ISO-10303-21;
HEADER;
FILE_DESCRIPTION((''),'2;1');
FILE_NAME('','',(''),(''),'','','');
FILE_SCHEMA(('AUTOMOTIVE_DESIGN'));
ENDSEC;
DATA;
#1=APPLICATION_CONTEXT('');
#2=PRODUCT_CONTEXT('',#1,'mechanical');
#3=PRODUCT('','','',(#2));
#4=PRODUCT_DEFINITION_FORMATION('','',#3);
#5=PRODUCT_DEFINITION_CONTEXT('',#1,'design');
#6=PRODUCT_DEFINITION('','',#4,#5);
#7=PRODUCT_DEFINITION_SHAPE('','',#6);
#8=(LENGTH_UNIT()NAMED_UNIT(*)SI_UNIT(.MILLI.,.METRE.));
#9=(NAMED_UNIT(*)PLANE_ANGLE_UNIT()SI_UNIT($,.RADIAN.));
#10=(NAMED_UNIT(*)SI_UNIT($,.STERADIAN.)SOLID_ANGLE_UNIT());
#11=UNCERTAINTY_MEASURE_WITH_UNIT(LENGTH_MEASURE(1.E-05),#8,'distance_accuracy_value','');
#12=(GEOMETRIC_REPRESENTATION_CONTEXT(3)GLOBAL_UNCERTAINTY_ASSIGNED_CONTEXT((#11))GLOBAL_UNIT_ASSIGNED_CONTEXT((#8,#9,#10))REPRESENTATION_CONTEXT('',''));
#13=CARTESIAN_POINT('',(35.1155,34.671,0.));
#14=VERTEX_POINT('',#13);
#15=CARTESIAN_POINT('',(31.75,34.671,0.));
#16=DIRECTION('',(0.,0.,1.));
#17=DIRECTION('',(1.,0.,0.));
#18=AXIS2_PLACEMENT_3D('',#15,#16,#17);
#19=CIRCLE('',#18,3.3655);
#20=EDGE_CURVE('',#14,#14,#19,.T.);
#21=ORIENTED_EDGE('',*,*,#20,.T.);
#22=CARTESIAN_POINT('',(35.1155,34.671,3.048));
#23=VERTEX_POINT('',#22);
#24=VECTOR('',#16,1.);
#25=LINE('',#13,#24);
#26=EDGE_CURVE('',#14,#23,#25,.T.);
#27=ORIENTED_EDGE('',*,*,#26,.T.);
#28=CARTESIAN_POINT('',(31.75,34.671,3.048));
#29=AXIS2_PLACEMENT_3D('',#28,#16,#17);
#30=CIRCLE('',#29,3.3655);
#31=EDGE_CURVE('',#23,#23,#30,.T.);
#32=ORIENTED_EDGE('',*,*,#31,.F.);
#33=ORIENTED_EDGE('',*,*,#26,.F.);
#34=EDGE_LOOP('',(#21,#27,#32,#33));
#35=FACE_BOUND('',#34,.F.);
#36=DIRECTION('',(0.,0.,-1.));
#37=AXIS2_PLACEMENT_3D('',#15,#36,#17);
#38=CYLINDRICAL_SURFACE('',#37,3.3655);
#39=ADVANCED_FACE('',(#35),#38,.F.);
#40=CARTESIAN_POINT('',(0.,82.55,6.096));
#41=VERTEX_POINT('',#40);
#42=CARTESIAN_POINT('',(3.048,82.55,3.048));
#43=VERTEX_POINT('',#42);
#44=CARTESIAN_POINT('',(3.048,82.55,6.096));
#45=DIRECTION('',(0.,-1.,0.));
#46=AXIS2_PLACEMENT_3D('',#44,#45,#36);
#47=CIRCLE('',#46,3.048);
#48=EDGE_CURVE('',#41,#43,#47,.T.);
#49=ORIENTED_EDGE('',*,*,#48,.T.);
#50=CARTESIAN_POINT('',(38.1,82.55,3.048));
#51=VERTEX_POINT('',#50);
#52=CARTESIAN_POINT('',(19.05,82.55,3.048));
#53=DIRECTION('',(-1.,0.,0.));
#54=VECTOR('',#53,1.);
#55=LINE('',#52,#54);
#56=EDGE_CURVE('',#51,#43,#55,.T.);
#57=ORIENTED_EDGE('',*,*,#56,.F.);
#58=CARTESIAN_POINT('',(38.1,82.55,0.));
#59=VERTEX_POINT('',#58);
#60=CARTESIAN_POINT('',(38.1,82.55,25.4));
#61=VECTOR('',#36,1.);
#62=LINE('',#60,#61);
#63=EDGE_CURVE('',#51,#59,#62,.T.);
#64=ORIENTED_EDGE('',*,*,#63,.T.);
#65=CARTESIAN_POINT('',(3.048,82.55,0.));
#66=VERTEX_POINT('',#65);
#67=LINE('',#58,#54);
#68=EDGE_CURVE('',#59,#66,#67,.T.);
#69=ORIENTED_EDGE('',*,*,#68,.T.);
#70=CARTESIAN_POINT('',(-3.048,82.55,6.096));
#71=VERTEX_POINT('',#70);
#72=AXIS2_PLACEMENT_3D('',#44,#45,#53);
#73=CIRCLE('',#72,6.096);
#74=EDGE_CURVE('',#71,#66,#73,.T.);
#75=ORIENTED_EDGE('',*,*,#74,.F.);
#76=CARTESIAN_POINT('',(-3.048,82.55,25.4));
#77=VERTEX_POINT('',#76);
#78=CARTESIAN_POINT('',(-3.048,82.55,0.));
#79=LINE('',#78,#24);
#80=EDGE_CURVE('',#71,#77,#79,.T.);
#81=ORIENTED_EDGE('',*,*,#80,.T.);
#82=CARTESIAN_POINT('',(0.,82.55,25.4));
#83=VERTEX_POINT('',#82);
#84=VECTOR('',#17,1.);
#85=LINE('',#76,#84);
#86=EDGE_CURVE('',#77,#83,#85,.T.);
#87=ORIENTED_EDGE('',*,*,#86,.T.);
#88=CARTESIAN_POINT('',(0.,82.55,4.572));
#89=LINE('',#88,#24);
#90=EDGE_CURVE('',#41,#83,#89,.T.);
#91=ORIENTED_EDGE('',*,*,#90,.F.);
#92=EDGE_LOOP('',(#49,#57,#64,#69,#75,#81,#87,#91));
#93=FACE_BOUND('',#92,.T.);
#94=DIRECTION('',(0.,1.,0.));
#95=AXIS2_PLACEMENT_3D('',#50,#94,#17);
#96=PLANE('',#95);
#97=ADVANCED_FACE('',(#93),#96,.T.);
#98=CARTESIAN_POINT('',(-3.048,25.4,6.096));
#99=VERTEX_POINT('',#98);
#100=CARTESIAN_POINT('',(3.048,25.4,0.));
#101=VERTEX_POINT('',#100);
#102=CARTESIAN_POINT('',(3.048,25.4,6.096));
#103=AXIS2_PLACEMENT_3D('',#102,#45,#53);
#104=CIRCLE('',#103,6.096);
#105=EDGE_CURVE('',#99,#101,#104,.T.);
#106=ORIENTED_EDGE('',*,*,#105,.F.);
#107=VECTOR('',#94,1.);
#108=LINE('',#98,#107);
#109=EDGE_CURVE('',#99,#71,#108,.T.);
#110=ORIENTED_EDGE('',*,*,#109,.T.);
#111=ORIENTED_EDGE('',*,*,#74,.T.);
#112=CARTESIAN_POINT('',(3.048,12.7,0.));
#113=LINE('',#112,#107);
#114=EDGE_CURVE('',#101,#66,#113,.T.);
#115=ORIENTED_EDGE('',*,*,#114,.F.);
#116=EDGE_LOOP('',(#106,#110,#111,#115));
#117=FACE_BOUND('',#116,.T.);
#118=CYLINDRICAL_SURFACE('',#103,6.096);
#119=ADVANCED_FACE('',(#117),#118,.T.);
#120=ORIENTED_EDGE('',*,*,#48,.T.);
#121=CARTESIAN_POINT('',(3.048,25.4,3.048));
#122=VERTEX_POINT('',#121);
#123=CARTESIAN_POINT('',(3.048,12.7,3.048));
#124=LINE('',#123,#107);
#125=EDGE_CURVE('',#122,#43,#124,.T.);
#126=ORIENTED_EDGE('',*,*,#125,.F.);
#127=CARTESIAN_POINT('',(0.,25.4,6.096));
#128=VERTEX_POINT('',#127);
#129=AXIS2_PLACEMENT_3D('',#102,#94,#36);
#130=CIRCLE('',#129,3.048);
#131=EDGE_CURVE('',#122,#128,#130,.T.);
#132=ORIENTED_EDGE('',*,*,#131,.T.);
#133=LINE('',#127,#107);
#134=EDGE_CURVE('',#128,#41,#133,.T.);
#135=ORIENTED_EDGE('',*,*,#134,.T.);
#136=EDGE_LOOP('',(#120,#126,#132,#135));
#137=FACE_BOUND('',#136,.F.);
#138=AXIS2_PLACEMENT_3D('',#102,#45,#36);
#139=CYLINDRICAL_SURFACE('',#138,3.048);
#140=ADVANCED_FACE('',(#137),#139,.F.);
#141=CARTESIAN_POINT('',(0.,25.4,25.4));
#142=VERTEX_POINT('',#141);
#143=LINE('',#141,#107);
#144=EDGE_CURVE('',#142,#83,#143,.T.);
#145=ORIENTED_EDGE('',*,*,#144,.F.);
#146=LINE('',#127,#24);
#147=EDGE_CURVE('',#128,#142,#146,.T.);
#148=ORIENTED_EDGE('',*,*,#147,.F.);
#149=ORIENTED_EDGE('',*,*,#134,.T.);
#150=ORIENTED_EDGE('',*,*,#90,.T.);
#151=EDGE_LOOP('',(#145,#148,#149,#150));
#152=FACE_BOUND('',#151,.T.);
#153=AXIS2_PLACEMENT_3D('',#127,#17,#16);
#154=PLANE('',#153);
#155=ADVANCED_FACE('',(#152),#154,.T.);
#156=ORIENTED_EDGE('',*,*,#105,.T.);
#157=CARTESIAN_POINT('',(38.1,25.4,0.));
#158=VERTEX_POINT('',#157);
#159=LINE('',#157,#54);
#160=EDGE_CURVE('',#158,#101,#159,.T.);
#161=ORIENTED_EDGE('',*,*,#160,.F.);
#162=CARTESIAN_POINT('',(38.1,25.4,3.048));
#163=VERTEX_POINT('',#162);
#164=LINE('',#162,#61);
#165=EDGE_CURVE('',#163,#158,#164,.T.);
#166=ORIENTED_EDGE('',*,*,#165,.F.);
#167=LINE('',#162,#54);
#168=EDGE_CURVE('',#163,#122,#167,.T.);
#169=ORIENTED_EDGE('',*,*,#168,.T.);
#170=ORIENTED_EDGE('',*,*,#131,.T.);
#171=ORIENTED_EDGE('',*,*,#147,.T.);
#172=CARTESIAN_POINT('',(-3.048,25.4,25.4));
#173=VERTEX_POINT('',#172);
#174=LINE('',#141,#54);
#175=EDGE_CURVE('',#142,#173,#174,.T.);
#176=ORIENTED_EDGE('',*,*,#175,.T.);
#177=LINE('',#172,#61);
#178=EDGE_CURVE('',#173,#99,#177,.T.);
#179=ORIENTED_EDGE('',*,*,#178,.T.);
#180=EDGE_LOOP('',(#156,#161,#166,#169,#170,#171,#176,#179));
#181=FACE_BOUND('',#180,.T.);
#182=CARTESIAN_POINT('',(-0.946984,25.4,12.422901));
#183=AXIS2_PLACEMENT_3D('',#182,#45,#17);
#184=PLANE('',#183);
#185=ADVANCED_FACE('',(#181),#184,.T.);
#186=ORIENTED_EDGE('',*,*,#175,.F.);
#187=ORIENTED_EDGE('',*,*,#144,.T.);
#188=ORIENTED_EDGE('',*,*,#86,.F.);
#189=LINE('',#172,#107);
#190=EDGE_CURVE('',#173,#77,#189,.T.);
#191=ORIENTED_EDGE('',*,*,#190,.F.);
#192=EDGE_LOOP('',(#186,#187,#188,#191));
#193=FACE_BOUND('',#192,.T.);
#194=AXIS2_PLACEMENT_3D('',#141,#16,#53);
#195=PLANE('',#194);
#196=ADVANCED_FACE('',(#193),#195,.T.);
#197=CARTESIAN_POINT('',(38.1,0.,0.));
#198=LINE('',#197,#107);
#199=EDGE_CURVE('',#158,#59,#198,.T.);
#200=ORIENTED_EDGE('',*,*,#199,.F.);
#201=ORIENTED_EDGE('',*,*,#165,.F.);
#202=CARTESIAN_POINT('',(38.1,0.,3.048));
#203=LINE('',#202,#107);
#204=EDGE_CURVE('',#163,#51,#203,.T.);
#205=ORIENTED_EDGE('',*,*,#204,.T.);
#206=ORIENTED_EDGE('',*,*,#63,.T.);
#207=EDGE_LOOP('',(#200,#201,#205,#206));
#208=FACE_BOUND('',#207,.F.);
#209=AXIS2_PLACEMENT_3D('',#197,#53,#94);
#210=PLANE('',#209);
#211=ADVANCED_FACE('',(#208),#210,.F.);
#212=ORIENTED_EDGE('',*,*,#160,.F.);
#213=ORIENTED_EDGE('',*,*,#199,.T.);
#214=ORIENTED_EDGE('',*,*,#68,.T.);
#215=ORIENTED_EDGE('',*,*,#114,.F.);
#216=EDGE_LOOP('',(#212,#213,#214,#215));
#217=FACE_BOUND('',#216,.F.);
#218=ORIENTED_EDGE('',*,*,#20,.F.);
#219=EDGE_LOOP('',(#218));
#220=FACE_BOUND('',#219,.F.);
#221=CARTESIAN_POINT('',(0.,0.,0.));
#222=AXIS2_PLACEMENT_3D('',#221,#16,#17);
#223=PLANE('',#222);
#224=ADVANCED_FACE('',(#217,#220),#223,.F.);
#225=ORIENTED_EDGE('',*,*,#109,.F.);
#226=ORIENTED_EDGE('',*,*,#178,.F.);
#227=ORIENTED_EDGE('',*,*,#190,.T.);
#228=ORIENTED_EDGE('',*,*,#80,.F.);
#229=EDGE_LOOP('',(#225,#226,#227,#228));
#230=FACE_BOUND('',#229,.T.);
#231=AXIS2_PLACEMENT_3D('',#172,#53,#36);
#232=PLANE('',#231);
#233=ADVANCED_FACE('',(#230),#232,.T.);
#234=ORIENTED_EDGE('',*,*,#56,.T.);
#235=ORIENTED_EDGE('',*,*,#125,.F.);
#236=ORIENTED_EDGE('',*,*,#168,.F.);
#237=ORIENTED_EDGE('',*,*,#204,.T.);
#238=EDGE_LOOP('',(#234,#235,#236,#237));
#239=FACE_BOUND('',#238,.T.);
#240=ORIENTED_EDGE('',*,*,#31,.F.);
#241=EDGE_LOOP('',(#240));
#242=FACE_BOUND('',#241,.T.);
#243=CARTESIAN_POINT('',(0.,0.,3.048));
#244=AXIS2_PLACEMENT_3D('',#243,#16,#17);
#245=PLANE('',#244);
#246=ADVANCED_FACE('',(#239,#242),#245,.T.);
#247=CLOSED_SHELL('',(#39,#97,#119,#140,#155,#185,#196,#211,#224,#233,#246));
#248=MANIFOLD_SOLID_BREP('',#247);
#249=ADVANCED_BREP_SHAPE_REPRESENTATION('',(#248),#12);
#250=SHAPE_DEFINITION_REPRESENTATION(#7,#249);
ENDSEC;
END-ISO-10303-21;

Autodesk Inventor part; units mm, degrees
ref_plane "YZ Plane" through (0, 0, 0) normal (1, 0, 0) x (0, 1, 0)
ref_plane "XZ Plane" through (0, 0, 0) normal (0, 1, 0) x (-1, 0, 0)
ref_plane "XY Plane" through (0, 0, 0) normal (0, 0, 1) x (1, 0, 0)
sketch "Sketch1" plane through (0, 0, 0) normal (0, 0, 1) x (1, 0, 0)
  line L0 (0, 0) -> (38.1, 0)
  line L1 (38.1, 0) -> (38.1, 253.0348)
  arc A0 (38.1, 507.0348) -> (38.1, 253.0348) centre (666.75, 380.0348) ccw
  line L2 (38.1, 507.0348) -> (38.1, 608.6348)
  line L3 (38.1, 608.6348) -> (0, 608.6348)
  line L4 (0, 608.6348) -> (0, 0)
  circle A1 centre (31.75, 151.4348) radius 3.3655
  circle A2 centre (31.75, 34.671) radius 3.3655
  circle A3 centre (12.7, 12.7) radius 3.3655
  circle A4 centre (12.7, 342.9) radius 3.3655
  circle A5 centre (12.7, 595.9348) radius 3.3655
  circle A6 centre (31.75, 12.7) radius 3.3655
  circle A7 centre (31.75, 253.0348) radius 3.3655
  circle A8 centre (31.75, 507.0348) radius 3.3655
  circle A9 centre (31.75, 595.9348) radius 3.3655
  line L5 (0, 557.8348) -> (0, 608.6348)
  line L6 (0, 50.8) -> (0, 0)
  line L7 (12.7, 342.9) -> (0, 304.3174) construction
  line L8 (0, 317.5) -> (0, 368.3)
  line L9 (0, 129.921) -> (12.7, 129.921) construction
  circle A10 centre (12.7, 129.921) radius 3.3655
  circle A11 centre (12.7, 174.371) radius 3.3655
  line L10 (9.3413, 197.482) -> (9.3413, 204.213)
  line L11 (16.0611, 204.488) -> (16.0611, 197.3435)
  arc A12 (16.0611, 204.488) -> (9.3413, 204.213) centre (12.6956, 204.488) ccw
  arc A13 (9.3413, 197.482) -> (16.0611, 197.3435) centre (12.6974, 197.231) ccw
  circle A14 centre (12.7, 217.188) radius 3.3655
  dimension "d0" = 38.1
  dimension "d2" = 101.6
  dimension "d4" = 457.2
  dimension "d5" = 101.6
  dimension "d6" = 666.75
  dimension "d7" = 641.35
  dimension "d9" = 116.7638
  dimension "d10" = 6.35
  dimension "d11" = 6.35
  dimension "d13" = 12.7
  dimension "d14" = 12.7
  dimension "d16" = 12.7
  dimension "d17" = 342.9
  dimension "d19" = 12.7
  dimension "d20" = 12.7
  dimension "d22" = 6.35
  dimension "d24" = 6.35
  dimension "d25" = 6.731
  dimension "d26" = 6.35
  dimension "hole" = 6.731
  dimension "d28" = 6.35
  dimension "d45" = 12.7
  dimension "d47" = 12.7
  dimension "d54" = 6.731
  dimension "d55" = 3.3655
  dimension "d56" = 3.3655
  dimension "d58" = 6.731
  dimension "d59" = 12.7
  dimension "d68" = 18.22
  dimension "d69" = 90
  dimension "d70" = 90
  dimension "d71" = 22.0389
  dimension "d72" = 28.7587
  dimension "d73" = 478.7138
  dimension "d74" = 6.35
  dimension "d75" = 6.35
  dimension "d76" = 595.9348
  dimension "d77" = 404.1468
  dimension "d78" = 411.2913
  dimension "d79" = 25.4
  dimension "d80" = 25.4
  dimension "d81" = 434.2638
  dimension "d82" = 50.8
  dimension "d83" = 240.3348
  dimension "d84" = 291.1348
  dimension "d85" = 557.8348
extrude "Plate4" add sketch "Sketch1" along normal blind 3.048
sketch "Sketch5" plane through (0, 0, 3.048) normal (0, 0, 1) x (1, 0, 0)
  line L0 (38.1, 0) -> (38.1, 253.0348) projected
  line L1 (0, 0) -> (38.1, 0)
  line L2 (38.1, 0) -> (38.1, 25.4)
  line L3 (38.1, 25.4) -> (0, 25.4)
  line L4 (0, 25.4) -> (0, 0)
  dimension "d96" = 25.4
extrude "Cut1" cut sketch "Sketch5" against normal blind 3.048
sketch "Sketch7" plane through (0, 25.4, 3.048) normal (-1, 0, 0) x (0, -1, 0)
  line L0 (-583.2348, 0) -> (0, 0)
  line L1 (0, 0) -> (0, 22.352)
  line L2 (0, 22.352) -> (-583.2348, 22.352)
  line L3 (-583.2348, 22.352) -> (-583.2348, 0)
edge flange "Flange3" height 25.4 angle 90 thickness 3.048 bend radius 3.048 thickness toward (-1, 0, 0) relief tear relief width 3.048 relief depth 1.524 edges at (0, 317.0174, 3.048) wall of the first edge with corners at (0, 608.6348, 3.048) (0, 25.4, 3.048) (0, 25.4, 25.4) (0, 608.6348, 25.4)
bend "Bend3"
corner "Corner3"
sketch "Sketch8" plane through (38.1, 608.6348, 3.048) normal (0, 1, 0) x (1, 0, 0)
  line L0 (-41.148, -22.352) -> (0, -22.352)
  line L1 (0, -22.352) -> (0, 3.048)
  line L2 (0, 3.048) -> (-41.148, 3.048)
  line L3 (-41.148, 3.048) -> (-41.148, -22.352)
  point P0 (-38.1, 3.048)
extrude "Extrusion1" cut sketch "Sketch8" against normal blind 526.0848
equation "\"d25\" = hole"
equation "\"d97\" = Thickness"
equation "\"d109\" = BendReliefWidth"
equation "\"d110\" = BendReliefDepth"
equation "\"d111\" = MinimumRemnant"
equation "\"d112\" = BendRadius"
equation "\"d115\" = BendRadius"
equation "\"d116\" = CornerReliefSize"
equation "\"d117\" = GapSize"
equation "\"d118\" = JacobiRadiusSize"
equation "\"BendRadius\" = Thickness"
equation "\"BendReliefWidth\" = Thickness"
equation "\"BendReliefDepth\" = 0.5 * Thickness"
equation "\"CornerReliefSize\" = 4 * Thickness"
equation "\"MinimumRemnant\" = 2 * Thickness"
equation "\"TransitionRadius\" = BendRadius"
equation "\"JacobiRadiusSize\" = BendRadius"
equation "\"GapSize\" = Thickness"
equation "\"d29\" = BendRadius"
equation "\"d32\" = BendRadius"
equation "\"d38\" = BendRadius"
equation "\"d60\" = BendRadius"
equation "\"Thickness\" = 3.048"
properties part number "Claw - Arm - Top (R) v3"
